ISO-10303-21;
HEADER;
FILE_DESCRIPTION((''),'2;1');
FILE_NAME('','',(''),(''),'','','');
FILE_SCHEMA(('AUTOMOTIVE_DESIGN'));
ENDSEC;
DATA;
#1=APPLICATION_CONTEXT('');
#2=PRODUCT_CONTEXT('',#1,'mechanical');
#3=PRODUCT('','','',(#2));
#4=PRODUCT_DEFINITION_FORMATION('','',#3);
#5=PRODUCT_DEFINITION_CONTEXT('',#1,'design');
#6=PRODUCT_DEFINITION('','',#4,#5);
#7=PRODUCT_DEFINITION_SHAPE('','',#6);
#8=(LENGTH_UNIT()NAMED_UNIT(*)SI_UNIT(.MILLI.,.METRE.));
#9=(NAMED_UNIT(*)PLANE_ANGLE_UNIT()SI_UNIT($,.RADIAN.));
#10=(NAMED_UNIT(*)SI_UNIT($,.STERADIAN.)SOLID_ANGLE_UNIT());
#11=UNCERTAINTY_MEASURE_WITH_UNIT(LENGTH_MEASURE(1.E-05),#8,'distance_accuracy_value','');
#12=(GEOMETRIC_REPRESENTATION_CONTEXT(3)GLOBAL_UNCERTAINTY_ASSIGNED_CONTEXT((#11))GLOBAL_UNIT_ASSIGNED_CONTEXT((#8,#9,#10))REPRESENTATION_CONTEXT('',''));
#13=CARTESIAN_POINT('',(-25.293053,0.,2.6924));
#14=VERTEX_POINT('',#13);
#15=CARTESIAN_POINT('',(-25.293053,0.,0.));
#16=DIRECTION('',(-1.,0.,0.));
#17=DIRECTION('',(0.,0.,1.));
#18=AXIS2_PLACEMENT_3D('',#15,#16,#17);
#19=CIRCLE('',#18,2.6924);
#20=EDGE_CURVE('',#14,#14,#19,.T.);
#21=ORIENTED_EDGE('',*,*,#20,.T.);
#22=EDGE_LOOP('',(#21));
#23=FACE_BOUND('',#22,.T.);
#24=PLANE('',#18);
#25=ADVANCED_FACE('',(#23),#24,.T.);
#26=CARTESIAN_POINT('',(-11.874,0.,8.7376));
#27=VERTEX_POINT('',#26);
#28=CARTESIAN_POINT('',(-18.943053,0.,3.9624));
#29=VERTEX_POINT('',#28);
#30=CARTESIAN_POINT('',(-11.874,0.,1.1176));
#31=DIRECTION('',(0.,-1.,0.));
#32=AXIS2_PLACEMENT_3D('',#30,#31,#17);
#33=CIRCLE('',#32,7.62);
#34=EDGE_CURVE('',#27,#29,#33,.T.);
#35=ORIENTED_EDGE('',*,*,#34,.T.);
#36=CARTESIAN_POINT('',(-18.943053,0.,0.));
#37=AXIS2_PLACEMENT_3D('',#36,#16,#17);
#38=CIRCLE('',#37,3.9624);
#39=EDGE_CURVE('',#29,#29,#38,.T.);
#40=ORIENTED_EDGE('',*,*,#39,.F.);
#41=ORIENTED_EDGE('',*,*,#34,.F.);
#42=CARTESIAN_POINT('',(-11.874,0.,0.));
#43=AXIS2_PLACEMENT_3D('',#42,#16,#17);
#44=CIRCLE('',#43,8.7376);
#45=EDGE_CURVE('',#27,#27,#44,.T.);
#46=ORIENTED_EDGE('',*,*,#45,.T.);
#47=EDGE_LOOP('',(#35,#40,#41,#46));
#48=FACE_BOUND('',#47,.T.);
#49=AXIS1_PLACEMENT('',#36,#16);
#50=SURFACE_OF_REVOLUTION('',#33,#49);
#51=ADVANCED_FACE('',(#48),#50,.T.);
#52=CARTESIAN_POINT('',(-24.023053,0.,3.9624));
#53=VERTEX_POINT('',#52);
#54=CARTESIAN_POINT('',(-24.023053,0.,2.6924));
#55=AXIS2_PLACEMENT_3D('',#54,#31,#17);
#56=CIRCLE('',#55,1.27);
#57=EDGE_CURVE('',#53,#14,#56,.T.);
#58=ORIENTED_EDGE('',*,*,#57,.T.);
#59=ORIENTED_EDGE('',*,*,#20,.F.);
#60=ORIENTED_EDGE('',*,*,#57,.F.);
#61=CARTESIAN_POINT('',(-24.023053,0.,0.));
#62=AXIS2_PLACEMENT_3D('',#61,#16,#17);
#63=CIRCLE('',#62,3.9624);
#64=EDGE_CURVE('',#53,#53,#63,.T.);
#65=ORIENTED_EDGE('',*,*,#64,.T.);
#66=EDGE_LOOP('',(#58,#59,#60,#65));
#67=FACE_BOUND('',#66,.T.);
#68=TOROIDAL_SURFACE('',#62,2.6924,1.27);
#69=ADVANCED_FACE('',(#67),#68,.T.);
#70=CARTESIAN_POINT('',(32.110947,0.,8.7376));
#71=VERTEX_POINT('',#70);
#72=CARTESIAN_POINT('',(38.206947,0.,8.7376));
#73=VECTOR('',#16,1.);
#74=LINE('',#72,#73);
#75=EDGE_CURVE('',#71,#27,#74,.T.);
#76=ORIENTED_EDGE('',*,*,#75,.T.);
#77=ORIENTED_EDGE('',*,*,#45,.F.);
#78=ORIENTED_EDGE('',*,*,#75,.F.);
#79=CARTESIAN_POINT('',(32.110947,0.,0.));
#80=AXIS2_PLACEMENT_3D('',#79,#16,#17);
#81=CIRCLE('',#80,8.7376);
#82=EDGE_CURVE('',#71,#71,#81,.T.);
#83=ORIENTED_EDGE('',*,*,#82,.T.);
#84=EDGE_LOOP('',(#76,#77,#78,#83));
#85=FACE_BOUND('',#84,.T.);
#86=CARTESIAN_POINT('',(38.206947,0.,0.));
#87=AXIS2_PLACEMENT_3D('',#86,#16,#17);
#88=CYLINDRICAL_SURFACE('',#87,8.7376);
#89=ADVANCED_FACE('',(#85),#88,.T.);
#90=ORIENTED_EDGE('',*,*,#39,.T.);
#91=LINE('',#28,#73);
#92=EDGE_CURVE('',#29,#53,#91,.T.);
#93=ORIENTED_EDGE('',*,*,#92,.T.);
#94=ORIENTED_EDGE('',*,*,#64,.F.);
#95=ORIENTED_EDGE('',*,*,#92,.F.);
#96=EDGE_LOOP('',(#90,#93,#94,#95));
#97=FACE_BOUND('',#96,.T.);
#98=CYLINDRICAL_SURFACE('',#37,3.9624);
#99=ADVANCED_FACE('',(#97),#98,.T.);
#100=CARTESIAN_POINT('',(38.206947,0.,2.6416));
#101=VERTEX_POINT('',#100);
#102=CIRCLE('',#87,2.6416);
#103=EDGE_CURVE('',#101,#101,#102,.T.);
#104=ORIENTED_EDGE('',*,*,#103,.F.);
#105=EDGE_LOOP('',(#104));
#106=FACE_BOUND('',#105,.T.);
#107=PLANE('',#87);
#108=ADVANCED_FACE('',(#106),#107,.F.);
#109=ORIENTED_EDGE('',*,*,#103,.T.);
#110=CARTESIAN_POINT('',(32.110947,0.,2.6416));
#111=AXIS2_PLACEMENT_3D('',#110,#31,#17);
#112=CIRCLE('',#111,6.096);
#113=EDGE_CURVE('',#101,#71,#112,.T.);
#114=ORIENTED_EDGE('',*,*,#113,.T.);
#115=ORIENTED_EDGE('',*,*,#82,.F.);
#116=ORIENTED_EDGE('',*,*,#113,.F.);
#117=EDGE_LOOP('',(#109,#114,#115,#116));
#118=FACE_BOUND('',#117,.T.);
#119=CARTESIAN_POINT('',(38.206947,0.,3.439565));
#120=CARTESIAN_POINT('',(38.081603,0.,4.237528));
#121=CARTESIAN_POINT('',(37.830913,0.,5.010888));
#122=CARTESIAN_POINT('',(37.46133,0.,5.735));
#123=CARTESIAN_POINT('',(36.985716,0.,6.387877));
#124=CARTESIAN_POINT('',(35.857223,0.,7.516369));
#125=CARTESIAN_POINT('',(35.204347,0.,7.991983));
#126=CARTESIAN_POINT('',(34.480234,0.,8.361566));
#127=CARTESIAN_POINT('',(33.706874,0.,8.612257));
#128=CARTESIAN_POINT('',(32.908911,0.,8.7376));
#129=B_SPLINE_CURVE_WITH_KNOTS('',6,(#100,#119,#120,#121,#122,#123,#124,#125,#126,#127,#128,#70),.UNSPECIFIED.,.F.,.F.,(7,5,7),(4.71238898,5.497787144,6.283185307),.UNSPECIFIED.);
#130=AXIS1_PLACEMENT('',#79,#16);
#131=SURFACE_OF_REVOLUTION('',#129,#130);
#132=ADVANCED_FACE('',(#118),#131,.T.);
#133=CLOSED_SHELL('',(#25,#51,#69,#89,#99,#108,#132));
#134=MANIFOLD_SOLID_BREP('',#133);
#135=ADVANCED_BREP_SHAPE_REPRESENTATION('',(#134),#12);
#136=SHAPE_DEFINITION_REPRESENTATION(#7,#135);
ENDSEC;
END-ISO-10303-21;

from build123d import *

# Parameters (mm, degrees)
F2_R = 6.096
F4_R = 1.27


# Not quite as in the source:
# - a fillet or chamfer that OpenCascade refuses, or shapes differently, is made with other operations: its cross-section is extruded or revolved along the edge and cut away or added


with BuildPart() as f1:
    # F0 (on Front) → F1 (revolve)
    with BuildSketch(Plane.XZ):
        Polygon((38.2069466584, 0), (38.2069466584, 8.7376), (-18.9430533416, 8.7376), (-18.9430533416, 3.9624), (-25.2930533416, 3.9624), (-25.2930533416, 0), align=None)
    revolve(axis=Axis((6.4569466584, 0, 0), (-1, 0, 0)))

    # F2
    f2_edges = [f1.edges().sort_by_distance(p)[0] for p in [
        (38.206947, 0, -8.7376),
    ]]
    fillet(f2_edges, radius=F2_R)

    # F3: fillet of radius 7.62 on 1 edges, made by hand

    # F3_s1 → F3_t2 (revolve, cut)
    with BuildSketch(Plane.XZ):
        with BuildLine():
            ThreePointArc((-11.8740001546, 8.7376), (-16.139385483, 7.4319398705), (-18.9430533416, 3.9624))
            Line((-18.9430533416, 3.9624), (-18.9430533416, 8.7376))
            Line((-18.9430533416, 8.7376), (-11.8740001546, 8.7376))
        make_face()
    revolve(axis=Axis((-18.9430533416, 0, 0), (-1, 0, 0)), mode=Mode.SUBTRACT)

    # F4
    f4_edges = [f1.edges().sort_by_distance(p)[0] for p in [
        (-25.293053, 0, -3.9624),
    ]]
    fillet(f4_edges, radius=F4_R)


solid = f1.part
